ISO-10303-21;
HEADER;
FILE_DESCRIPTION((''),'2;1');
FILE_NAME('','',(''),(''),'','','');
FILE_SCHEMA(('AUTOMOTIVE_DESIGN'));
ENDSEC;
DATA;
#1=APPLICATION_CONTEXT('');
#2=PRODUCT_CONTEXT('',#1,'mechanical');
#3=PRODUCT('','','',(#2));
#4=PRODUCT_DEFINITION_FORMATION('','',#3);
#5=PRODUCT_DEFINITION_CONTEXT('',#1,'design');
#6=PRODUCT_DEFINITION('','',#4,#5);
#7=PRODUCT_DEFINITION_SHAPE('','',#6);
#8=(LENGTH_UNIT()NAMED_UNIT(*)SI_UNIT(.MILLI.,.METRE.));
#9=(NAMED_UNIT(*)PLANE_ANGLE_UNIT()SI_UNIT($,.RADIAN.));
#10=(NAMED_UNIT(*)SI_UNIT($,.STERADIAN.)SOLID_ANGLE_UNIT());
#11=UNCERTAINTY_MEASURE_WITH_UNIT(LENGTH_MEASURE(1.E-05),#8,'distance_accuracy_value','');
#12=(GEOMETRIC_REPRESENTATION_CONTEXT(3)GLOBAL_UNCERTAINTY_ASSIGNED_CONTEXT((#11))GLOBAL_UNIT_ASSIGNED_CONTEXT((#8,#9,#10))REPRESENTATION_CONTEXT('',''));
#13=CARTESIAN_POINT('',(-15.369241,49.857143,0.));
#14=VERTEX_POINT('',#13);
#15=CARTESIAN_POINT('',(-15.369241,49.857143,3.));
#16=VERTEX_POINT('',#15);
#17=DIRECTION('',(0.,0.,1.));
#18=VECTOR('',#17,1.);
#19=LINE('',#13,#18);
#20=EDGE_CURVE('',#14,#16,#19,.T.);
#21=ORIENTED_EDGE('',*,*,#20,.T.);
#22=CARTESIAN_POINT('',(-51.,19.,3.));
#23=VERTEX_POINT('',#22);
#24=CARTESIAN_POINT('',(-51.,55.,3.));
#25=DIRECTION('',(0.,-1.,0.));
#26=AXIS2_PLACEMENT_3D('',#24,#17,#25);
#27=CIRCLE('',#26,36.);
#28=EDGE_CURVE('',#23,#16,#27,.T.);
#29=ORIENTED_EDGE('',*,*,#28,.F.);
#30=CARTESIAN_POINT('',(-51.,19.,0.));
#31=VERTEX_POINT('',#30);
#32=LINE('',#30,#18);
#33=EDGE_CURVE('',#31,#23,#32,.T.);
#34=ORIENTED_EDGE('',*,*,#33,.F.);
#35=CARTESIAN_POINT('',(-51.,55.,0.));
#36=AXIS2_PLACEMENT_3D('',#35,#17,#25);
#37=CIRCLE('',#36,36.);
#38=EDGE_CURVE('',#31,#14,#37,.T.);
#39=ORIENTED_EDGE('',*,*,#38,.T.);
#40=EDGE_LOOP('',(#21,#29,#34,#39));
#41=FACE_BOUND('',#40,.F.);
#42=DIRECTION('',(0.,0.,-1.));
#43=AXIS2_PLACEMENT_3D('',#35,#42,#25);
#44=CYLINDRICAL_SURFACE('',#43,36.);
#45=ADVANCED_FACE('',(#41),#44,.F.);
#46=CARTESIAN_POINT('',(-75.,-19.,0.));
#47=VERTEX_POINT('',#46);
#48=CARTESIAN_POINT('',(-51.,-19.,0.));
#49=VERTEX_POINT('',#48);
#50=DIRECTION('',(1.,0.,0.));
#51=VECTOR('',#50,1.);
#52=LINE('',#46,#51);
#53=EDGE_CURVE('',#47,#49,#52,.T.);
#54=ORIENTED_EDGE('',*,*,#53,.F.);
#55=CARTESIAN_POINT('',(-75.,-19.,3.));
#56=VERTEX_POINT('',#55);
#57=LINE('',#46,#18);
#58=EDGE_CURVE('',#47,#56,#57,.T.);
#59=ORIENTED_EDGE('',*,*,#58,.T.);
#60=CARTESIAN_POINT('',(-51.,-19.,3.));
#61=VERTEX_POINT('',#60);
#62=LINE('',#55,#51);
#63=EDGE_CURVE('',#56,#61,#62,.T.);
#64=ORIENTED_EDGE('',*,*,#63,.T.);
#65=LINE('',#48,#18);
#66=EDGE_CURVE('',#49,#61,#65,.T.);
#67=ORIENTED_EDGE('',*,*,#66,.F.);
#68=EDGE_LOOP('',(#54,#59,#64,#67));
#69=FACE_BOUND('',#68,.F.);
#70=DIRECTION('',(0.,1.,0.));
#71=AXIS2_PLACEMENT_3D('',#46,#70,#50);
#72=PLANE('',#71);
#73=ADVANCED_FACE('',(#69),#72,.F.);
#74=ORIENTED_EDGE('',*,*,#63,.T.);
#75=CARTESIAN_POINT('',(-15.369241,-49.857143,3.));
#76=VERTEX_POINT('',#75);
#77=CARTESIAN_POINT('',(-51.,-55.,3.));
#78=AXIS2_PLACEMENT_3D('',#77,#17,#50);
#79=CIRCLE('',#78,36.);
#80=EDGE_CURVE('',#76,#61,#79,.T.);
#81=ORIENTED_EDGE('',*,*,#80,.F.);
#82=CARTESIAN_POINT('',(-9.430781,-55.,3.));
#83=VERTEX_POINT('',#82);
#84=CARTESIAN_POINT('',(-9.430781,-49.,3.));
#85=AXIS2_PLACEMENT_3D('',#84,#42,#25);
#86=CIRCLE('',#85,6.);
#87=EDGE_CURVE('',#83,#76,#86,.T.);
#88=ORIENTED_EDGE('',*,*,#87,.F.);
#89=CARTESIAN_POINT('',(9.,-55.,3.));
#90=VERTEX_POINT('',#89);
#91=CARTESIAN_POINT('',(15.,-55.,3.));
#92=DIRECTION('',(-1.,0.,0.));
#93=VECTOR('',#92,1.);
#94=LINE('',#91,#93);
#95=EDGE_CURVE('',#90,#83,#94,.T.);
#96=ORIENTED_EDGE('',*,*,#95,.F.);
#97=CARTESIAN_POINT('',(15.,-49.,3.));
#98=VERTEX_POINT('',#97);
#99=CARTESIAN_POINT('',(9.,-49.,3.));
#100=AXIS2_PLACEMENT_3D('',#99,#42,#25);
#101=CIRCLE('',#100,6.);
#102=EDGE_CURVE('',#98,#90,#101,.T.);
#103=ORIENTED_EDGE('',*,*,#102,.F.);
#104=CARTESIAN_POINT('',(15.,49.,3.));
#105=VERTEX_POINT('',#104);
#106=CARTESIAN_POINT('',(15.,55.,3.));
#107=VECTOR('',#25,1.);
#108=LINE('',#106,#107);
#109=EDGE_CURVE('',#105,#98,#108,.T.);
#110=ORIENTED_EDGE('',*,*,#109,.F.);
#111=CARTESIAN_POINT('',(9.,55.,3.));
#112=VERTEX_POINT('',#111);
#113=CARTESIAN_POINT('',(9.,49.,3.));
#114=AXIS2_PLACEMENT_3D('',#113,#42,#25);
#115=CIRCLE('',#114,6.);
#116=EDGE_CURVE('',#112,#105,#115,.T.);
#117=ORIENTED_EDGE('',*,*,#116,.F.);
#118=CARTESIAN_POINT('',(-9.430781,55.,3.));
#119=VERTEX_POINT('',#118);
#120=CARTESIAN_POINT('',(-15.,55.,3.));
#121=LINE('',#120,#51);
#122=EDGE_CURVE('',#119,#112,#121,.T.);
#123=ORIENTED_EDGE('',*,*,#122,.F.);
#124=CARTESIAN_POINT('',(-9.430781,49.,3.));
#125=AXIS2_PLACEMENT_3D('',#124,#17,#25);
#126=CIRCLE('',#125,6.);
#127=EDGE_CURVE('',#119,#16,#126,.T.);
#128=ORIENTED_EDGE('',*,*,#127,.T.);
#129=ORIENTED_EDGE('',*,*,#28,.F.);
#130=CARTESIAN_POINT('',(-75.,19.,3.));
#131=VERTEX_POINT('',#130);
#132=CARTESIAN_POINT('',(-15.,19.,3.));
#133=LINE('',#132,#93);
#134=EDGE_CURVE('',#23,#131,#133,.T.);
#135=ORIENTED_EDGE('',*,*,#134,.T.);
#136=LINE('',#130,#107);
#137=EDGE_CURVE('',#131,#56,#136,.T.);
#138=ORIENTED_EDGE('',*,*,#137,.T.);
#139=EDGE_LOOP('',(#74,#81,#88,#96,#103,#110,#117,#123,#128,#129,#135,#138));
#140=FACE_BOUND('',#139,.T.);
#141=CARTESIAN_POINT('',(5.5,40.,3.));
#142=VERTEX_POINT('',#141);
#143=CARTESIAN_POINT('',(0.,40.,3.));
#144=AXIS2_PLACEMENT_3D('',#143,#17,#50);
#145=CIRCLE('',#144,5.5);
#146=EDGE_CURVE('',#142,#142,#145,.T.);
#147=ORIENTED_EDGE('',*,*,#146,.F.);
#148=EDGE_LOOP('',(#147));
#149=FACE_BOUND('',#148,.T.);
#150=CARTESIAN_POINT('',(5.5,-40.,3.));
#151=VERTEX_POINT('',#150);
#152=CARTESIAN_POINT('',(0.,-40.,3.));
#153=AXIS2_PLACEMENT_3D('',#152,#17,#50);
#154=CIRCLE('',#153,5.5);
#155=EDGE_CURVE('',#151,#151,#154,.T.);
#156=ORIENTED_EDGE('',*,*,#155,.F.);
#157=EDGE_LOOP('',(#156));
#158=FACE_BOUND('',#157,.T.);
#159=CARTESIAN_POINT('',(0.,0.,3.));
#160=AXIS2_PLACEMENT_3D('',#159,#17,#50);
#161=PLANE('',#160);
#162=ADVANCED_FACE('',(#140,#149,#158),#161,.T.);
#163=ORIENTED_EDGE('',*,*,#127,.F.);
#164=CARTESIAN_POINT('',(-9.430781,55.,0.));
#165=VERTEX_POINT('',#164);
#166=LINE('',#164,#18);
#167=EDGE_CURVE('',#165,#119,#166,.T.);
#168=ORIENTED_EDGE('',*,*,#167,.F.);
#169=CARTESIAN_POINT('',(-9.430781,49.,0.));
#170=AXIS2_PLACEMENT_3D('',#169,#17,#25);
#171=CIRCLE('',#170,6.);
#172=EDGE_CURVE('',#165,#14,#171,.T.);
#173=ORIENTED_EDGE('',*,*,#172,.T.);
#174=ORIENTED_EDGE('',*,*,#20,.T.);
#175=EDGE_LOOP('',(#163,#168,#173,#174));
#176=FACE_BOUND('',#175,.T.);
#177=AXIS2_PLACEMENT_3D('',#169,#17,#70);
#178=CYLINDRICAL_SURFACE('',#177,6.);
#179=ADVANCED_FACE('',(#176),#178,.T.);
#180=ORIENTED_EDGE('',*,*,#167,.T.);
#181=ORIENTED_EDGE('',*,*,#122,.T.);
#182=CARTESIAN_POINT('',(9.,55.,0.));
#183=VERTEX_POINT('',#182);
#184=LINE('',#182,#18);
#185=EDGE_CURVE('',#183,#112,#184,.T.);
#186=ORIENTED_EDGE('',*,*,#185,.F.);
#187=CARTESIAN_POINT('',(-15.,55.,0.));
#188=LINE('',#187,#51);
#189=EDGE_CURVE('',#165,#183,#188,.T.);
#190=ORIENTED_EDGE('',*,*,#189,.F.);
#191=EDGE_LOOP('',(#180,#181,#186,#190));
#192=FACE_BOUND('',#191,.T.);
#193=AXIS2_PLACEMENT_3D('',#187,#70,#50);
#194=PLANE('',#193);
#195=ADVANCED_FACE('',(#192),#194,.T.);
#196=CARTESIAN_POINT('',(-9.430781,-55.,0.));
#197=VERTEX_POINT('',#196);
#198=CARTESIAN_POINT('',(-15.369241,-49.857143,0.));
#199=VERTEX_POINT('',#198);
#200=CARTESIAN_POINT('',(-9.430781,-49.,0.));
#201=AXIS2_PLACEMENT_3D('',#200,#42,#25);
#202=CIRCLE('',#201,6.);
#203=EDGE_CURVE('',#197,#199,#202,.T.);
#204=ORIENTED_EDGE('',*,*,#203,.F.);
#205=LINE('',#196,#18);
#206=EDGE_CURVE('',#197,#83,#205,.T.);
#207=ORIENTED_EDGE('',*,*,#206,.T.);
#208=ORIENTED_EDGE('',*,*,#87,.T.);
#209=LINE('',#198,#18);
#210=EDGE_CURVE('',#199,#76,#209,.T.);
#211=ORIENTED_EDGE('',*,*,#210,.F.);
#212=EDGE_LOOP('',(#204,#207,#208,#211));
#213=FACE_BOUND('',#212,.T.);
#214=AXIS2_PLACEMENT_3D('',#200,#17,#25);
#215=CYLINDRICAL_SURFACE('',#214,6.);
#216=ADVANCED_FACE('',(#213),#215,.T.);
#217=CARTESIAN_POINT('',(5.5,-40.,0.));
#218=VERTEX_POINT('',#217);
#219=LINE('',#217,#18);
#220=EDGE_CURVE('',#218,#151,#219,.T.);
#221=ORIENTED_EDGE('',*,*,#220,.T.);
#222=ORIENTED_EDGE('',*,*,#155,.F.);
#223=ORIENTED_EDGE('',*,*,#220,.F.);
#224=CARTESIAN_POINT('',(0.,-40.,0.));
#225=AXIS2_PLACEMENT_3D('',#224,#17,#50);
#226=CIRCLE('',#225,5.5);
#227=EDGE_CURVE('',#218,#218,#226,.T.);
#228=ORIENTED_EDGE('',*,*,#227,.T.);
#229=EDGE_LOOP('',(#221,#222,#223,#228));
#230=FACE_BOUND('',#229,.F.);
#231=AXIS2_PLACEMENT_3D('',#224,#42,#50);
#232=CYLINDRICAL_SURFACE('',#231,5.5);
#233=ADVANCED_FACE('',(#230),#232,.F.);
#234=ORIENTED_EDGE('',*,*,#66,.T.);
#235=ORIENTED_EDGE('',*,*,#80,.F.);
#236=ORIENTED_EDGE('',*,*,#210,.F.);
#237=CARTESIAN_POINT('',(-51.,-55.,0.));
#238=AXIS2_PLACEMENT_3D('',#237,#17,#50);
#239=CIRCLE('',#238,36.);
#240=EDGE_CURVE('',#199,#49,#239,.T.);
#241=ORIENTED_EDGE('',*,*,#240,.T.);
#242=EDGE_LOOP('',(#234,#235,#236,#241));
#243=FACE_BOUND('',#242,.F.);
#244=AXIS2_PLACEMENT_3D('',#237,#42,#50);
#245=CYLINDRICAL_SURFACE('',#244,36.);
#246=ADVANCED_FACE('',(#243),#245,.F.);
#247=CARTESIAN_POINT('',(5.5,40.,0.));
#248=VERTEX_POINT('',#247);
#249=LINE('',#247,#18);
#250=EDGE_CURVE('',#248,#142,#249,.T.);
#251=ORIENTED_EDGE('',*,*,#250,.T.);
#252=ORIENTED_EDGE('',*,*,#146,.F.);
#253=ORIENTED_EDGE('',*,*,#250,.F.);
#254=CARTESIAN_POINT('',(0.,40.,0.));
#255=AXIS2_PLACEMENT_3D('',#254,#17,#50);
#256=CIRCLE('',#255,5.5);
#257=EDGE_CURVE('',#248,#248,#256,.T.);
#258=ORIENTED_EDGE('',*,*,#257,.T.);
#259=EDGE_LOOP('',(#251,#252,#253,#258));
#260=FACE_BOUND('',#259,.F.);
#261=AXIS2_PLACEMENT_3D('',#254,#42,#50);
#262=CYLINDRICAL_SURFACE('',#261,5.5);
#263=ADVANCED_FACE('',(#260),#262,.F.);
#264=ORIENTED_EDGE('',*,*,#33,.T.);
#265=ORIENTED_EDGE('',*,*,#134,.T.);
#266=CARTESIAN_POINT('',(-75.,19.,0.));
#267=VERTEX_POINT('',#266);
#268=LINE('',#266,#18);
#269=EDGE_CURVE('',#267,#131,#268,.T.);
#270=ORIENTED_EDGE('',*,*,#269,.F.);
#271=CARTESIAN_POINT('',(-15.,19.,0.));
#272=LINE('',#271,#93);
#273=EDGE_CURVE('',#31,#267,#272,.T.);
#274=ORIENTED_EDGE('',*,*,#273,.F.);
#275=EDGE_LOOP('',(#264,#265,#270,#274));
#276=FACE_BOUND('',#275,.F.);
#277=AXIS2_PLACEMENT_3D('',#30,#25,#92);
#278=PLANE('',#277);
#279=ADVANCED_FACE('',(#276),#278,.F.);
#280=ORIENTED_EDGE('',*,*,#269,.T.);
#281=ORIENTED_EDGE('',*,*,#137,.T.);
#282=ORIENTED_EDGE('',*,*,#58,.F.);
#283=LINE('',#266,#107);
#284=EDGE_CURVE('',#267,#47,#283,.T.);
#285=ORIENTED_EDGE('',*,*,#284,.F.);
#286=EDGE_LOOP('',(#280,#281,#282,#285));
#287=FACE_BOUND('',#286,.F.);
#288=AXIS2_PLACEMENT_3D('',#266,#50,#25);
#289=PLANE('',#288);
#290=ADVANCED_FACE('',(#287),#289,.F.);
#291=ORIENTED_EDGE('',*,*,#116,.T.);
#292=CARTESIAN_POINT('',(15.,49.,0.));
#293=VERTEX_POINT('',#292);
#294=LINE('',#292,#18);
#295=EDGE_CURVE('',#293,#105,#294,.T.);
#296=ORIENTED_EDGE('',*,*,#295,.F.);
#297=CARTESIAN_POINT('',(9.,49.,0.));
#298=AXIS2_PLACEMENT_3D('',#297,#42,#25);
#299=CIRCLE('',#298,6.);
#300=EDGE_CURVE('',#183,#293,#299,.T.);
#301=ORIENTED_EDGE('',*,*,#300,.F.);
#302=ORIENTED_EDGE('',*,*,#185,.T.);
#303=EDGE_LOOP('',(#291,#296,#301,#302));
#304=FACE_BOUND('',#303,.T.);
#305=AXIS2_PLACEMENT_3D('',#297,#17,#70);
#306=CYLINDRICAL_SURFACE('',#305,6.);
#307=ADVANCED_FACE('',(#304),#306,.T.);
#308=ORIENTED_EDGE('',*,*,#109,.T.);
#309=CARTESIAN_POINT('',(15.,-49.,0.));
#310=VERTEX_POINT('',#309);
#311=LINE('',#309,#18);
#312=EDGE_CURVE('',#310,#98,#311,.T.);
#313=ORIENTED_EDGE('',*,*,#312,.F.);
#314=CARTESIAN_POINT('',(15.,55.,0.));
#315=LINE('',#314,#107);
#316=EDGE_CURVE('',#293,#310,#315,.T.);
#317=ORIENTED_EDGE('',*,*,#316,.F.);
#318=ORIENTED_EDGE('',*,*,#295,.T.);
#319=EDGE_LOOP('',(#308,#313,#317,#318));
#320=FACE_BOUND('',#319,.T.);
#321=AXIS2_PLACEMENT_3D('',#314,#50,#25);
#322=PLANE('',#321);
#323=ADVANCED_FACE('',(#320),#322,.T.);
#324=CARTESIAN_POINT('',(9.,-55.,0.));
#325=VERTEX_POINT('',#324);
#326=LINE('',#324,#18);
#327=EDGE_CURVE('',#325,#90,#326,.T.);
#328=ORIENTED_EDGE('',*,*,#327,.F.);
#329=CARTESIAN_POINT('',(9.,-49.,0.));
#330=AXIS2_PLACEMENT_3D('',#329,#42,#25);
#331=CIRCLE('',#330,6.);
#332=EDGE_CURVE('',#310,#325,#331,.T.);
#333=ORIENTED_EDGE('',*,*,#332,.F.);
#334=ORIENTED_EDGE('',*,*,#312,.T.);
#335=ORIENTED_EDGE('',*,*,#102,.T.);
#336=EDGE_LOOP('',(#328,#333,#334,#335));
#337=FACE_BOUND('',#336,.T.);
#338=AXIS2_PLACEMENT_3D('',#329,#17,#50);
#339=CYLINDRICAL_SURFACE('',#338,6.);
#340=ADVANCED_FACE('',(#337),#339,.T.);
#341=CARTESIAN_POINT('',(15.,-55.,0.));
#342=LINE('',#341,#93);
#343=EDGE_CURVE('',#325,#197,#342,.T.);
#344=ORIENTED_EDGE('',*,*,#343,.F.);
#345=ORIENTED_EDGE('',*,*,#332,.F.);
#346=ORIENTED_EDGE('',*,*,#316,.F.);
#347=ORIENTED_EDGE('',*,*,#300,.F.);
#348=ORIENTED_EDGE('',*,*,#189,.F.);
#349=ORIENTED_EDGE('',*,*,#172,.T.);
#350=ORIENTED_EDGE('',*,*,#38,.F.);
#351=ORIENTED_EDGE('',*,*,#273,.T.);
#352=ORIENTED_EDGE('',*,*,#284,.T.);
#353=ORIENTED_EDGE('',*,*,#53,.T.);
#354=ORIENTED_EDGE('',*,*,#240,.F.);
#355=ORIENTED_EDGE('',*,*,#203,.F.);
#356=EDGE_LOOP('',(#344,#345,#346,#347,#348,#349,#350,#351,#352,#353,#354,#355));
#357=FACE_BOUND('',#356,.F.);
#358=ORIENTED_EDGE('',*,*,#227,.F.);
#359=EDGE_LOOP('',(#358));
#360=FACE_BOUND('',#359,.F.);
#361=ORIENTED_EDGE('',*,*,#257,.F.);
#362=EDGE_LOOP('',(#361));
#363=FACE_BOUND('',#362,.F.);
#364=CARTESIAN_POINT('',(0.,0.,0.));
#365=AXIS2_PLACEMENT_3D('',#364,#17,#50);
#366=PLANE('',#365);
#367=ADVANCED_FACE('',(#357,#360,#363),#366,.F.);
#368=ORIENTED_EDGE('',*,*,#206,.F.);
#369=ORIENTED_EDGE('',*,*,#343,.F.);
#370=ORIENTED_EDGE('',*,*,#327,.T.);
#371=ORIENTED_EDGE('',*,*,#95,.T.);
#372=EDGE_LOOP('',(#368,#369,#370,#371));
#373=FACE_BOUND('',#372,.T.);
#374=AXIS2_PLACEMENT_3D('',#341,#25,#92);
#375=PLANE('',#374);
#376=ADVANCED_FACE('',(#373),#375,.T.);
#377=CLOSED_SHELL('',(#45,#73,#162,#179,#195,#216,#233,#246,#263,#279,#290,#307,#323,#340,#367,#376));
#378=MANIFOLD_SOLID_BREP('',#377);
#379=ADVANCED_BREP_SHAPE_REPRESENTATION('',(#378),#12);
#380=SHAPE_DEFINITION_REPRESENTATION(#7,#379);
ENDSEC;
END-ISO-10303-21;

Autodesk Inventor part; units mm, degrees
ref_plane "YZ Plane" through (0, 0, 0) normal (1, 0, 0) x (0, 1, 0)
ref_plane "XZ Plane" through (0, 0, 0) normal (0, 1, 0) x (-1, 0, 0)
ref_plane "XY Plane" through (0, 0, 0) normal (0, 0, 1) x (1, 0, 0)
sketch "Sketch1" plane through (0, 0, 0) normal (0, 0, 1) x (1, 0, 0)
  line L0 (-15, 55) -> (15, 55)
  line L1 (15, 55) -> (15, -55)
  line L2 (15, -55) -> (-15, -55)
  line L3 (-15, -55) -> (-15, 55)
  line L4 (-15, 55) -> (15, -55) construction
  line L5 (15, 55) -> (-15, -55) construction
  line L6 (-15, 19) -> (-75, 19)
  line L7 (-75, 19) -> (-75, -19)
  line L8 (-75, -19) -> (-15, -19)
  line L9 (-15, -19) -> (-15, 19)
  arc A0 (-51, 19) -> (-15, 55) centre (-51, 55) ccw
  arc A1 (-15, -55) -> (-51, -19) centre (-51, -55) ccw
  circle A2 centre (0, 40) radius 5.5
  circle A3 centre (0, -40) radius 5.5
  line L10 (0, 0) -> (15, 0) construction
  point P0 (-75, 0)
  dimension "d157" = 30
  dimension "d158" = 110
  dimension "d159" = 38
  dimension "d160" = 80
  dimension "d161" = 11
  dimension "d162" = 60
extrude "Plate3" add sketch "Sketch1" along normal blind 3
fillet "Corner Round2" radius 6 4 edges at (-15, 55, 1.5) (15, 55, 1.5) (-15, -55, 1.5) (15, -55, 1.5)
equation "\"BendReliefWidth\" = Thickness"
equation "\"BendReliefDepth\" = 0.5 * Thickness"
equation "\"CornerReliefSize\" = 4 * Thickness"
equation "\"MinimumRemnant\" = 2 * Thickness"
equation "\"GapSize\" = Thickness"
equation "\"Thickness\" = 3"
properties part number "MSC 815 wall inner" material "AISI304"
